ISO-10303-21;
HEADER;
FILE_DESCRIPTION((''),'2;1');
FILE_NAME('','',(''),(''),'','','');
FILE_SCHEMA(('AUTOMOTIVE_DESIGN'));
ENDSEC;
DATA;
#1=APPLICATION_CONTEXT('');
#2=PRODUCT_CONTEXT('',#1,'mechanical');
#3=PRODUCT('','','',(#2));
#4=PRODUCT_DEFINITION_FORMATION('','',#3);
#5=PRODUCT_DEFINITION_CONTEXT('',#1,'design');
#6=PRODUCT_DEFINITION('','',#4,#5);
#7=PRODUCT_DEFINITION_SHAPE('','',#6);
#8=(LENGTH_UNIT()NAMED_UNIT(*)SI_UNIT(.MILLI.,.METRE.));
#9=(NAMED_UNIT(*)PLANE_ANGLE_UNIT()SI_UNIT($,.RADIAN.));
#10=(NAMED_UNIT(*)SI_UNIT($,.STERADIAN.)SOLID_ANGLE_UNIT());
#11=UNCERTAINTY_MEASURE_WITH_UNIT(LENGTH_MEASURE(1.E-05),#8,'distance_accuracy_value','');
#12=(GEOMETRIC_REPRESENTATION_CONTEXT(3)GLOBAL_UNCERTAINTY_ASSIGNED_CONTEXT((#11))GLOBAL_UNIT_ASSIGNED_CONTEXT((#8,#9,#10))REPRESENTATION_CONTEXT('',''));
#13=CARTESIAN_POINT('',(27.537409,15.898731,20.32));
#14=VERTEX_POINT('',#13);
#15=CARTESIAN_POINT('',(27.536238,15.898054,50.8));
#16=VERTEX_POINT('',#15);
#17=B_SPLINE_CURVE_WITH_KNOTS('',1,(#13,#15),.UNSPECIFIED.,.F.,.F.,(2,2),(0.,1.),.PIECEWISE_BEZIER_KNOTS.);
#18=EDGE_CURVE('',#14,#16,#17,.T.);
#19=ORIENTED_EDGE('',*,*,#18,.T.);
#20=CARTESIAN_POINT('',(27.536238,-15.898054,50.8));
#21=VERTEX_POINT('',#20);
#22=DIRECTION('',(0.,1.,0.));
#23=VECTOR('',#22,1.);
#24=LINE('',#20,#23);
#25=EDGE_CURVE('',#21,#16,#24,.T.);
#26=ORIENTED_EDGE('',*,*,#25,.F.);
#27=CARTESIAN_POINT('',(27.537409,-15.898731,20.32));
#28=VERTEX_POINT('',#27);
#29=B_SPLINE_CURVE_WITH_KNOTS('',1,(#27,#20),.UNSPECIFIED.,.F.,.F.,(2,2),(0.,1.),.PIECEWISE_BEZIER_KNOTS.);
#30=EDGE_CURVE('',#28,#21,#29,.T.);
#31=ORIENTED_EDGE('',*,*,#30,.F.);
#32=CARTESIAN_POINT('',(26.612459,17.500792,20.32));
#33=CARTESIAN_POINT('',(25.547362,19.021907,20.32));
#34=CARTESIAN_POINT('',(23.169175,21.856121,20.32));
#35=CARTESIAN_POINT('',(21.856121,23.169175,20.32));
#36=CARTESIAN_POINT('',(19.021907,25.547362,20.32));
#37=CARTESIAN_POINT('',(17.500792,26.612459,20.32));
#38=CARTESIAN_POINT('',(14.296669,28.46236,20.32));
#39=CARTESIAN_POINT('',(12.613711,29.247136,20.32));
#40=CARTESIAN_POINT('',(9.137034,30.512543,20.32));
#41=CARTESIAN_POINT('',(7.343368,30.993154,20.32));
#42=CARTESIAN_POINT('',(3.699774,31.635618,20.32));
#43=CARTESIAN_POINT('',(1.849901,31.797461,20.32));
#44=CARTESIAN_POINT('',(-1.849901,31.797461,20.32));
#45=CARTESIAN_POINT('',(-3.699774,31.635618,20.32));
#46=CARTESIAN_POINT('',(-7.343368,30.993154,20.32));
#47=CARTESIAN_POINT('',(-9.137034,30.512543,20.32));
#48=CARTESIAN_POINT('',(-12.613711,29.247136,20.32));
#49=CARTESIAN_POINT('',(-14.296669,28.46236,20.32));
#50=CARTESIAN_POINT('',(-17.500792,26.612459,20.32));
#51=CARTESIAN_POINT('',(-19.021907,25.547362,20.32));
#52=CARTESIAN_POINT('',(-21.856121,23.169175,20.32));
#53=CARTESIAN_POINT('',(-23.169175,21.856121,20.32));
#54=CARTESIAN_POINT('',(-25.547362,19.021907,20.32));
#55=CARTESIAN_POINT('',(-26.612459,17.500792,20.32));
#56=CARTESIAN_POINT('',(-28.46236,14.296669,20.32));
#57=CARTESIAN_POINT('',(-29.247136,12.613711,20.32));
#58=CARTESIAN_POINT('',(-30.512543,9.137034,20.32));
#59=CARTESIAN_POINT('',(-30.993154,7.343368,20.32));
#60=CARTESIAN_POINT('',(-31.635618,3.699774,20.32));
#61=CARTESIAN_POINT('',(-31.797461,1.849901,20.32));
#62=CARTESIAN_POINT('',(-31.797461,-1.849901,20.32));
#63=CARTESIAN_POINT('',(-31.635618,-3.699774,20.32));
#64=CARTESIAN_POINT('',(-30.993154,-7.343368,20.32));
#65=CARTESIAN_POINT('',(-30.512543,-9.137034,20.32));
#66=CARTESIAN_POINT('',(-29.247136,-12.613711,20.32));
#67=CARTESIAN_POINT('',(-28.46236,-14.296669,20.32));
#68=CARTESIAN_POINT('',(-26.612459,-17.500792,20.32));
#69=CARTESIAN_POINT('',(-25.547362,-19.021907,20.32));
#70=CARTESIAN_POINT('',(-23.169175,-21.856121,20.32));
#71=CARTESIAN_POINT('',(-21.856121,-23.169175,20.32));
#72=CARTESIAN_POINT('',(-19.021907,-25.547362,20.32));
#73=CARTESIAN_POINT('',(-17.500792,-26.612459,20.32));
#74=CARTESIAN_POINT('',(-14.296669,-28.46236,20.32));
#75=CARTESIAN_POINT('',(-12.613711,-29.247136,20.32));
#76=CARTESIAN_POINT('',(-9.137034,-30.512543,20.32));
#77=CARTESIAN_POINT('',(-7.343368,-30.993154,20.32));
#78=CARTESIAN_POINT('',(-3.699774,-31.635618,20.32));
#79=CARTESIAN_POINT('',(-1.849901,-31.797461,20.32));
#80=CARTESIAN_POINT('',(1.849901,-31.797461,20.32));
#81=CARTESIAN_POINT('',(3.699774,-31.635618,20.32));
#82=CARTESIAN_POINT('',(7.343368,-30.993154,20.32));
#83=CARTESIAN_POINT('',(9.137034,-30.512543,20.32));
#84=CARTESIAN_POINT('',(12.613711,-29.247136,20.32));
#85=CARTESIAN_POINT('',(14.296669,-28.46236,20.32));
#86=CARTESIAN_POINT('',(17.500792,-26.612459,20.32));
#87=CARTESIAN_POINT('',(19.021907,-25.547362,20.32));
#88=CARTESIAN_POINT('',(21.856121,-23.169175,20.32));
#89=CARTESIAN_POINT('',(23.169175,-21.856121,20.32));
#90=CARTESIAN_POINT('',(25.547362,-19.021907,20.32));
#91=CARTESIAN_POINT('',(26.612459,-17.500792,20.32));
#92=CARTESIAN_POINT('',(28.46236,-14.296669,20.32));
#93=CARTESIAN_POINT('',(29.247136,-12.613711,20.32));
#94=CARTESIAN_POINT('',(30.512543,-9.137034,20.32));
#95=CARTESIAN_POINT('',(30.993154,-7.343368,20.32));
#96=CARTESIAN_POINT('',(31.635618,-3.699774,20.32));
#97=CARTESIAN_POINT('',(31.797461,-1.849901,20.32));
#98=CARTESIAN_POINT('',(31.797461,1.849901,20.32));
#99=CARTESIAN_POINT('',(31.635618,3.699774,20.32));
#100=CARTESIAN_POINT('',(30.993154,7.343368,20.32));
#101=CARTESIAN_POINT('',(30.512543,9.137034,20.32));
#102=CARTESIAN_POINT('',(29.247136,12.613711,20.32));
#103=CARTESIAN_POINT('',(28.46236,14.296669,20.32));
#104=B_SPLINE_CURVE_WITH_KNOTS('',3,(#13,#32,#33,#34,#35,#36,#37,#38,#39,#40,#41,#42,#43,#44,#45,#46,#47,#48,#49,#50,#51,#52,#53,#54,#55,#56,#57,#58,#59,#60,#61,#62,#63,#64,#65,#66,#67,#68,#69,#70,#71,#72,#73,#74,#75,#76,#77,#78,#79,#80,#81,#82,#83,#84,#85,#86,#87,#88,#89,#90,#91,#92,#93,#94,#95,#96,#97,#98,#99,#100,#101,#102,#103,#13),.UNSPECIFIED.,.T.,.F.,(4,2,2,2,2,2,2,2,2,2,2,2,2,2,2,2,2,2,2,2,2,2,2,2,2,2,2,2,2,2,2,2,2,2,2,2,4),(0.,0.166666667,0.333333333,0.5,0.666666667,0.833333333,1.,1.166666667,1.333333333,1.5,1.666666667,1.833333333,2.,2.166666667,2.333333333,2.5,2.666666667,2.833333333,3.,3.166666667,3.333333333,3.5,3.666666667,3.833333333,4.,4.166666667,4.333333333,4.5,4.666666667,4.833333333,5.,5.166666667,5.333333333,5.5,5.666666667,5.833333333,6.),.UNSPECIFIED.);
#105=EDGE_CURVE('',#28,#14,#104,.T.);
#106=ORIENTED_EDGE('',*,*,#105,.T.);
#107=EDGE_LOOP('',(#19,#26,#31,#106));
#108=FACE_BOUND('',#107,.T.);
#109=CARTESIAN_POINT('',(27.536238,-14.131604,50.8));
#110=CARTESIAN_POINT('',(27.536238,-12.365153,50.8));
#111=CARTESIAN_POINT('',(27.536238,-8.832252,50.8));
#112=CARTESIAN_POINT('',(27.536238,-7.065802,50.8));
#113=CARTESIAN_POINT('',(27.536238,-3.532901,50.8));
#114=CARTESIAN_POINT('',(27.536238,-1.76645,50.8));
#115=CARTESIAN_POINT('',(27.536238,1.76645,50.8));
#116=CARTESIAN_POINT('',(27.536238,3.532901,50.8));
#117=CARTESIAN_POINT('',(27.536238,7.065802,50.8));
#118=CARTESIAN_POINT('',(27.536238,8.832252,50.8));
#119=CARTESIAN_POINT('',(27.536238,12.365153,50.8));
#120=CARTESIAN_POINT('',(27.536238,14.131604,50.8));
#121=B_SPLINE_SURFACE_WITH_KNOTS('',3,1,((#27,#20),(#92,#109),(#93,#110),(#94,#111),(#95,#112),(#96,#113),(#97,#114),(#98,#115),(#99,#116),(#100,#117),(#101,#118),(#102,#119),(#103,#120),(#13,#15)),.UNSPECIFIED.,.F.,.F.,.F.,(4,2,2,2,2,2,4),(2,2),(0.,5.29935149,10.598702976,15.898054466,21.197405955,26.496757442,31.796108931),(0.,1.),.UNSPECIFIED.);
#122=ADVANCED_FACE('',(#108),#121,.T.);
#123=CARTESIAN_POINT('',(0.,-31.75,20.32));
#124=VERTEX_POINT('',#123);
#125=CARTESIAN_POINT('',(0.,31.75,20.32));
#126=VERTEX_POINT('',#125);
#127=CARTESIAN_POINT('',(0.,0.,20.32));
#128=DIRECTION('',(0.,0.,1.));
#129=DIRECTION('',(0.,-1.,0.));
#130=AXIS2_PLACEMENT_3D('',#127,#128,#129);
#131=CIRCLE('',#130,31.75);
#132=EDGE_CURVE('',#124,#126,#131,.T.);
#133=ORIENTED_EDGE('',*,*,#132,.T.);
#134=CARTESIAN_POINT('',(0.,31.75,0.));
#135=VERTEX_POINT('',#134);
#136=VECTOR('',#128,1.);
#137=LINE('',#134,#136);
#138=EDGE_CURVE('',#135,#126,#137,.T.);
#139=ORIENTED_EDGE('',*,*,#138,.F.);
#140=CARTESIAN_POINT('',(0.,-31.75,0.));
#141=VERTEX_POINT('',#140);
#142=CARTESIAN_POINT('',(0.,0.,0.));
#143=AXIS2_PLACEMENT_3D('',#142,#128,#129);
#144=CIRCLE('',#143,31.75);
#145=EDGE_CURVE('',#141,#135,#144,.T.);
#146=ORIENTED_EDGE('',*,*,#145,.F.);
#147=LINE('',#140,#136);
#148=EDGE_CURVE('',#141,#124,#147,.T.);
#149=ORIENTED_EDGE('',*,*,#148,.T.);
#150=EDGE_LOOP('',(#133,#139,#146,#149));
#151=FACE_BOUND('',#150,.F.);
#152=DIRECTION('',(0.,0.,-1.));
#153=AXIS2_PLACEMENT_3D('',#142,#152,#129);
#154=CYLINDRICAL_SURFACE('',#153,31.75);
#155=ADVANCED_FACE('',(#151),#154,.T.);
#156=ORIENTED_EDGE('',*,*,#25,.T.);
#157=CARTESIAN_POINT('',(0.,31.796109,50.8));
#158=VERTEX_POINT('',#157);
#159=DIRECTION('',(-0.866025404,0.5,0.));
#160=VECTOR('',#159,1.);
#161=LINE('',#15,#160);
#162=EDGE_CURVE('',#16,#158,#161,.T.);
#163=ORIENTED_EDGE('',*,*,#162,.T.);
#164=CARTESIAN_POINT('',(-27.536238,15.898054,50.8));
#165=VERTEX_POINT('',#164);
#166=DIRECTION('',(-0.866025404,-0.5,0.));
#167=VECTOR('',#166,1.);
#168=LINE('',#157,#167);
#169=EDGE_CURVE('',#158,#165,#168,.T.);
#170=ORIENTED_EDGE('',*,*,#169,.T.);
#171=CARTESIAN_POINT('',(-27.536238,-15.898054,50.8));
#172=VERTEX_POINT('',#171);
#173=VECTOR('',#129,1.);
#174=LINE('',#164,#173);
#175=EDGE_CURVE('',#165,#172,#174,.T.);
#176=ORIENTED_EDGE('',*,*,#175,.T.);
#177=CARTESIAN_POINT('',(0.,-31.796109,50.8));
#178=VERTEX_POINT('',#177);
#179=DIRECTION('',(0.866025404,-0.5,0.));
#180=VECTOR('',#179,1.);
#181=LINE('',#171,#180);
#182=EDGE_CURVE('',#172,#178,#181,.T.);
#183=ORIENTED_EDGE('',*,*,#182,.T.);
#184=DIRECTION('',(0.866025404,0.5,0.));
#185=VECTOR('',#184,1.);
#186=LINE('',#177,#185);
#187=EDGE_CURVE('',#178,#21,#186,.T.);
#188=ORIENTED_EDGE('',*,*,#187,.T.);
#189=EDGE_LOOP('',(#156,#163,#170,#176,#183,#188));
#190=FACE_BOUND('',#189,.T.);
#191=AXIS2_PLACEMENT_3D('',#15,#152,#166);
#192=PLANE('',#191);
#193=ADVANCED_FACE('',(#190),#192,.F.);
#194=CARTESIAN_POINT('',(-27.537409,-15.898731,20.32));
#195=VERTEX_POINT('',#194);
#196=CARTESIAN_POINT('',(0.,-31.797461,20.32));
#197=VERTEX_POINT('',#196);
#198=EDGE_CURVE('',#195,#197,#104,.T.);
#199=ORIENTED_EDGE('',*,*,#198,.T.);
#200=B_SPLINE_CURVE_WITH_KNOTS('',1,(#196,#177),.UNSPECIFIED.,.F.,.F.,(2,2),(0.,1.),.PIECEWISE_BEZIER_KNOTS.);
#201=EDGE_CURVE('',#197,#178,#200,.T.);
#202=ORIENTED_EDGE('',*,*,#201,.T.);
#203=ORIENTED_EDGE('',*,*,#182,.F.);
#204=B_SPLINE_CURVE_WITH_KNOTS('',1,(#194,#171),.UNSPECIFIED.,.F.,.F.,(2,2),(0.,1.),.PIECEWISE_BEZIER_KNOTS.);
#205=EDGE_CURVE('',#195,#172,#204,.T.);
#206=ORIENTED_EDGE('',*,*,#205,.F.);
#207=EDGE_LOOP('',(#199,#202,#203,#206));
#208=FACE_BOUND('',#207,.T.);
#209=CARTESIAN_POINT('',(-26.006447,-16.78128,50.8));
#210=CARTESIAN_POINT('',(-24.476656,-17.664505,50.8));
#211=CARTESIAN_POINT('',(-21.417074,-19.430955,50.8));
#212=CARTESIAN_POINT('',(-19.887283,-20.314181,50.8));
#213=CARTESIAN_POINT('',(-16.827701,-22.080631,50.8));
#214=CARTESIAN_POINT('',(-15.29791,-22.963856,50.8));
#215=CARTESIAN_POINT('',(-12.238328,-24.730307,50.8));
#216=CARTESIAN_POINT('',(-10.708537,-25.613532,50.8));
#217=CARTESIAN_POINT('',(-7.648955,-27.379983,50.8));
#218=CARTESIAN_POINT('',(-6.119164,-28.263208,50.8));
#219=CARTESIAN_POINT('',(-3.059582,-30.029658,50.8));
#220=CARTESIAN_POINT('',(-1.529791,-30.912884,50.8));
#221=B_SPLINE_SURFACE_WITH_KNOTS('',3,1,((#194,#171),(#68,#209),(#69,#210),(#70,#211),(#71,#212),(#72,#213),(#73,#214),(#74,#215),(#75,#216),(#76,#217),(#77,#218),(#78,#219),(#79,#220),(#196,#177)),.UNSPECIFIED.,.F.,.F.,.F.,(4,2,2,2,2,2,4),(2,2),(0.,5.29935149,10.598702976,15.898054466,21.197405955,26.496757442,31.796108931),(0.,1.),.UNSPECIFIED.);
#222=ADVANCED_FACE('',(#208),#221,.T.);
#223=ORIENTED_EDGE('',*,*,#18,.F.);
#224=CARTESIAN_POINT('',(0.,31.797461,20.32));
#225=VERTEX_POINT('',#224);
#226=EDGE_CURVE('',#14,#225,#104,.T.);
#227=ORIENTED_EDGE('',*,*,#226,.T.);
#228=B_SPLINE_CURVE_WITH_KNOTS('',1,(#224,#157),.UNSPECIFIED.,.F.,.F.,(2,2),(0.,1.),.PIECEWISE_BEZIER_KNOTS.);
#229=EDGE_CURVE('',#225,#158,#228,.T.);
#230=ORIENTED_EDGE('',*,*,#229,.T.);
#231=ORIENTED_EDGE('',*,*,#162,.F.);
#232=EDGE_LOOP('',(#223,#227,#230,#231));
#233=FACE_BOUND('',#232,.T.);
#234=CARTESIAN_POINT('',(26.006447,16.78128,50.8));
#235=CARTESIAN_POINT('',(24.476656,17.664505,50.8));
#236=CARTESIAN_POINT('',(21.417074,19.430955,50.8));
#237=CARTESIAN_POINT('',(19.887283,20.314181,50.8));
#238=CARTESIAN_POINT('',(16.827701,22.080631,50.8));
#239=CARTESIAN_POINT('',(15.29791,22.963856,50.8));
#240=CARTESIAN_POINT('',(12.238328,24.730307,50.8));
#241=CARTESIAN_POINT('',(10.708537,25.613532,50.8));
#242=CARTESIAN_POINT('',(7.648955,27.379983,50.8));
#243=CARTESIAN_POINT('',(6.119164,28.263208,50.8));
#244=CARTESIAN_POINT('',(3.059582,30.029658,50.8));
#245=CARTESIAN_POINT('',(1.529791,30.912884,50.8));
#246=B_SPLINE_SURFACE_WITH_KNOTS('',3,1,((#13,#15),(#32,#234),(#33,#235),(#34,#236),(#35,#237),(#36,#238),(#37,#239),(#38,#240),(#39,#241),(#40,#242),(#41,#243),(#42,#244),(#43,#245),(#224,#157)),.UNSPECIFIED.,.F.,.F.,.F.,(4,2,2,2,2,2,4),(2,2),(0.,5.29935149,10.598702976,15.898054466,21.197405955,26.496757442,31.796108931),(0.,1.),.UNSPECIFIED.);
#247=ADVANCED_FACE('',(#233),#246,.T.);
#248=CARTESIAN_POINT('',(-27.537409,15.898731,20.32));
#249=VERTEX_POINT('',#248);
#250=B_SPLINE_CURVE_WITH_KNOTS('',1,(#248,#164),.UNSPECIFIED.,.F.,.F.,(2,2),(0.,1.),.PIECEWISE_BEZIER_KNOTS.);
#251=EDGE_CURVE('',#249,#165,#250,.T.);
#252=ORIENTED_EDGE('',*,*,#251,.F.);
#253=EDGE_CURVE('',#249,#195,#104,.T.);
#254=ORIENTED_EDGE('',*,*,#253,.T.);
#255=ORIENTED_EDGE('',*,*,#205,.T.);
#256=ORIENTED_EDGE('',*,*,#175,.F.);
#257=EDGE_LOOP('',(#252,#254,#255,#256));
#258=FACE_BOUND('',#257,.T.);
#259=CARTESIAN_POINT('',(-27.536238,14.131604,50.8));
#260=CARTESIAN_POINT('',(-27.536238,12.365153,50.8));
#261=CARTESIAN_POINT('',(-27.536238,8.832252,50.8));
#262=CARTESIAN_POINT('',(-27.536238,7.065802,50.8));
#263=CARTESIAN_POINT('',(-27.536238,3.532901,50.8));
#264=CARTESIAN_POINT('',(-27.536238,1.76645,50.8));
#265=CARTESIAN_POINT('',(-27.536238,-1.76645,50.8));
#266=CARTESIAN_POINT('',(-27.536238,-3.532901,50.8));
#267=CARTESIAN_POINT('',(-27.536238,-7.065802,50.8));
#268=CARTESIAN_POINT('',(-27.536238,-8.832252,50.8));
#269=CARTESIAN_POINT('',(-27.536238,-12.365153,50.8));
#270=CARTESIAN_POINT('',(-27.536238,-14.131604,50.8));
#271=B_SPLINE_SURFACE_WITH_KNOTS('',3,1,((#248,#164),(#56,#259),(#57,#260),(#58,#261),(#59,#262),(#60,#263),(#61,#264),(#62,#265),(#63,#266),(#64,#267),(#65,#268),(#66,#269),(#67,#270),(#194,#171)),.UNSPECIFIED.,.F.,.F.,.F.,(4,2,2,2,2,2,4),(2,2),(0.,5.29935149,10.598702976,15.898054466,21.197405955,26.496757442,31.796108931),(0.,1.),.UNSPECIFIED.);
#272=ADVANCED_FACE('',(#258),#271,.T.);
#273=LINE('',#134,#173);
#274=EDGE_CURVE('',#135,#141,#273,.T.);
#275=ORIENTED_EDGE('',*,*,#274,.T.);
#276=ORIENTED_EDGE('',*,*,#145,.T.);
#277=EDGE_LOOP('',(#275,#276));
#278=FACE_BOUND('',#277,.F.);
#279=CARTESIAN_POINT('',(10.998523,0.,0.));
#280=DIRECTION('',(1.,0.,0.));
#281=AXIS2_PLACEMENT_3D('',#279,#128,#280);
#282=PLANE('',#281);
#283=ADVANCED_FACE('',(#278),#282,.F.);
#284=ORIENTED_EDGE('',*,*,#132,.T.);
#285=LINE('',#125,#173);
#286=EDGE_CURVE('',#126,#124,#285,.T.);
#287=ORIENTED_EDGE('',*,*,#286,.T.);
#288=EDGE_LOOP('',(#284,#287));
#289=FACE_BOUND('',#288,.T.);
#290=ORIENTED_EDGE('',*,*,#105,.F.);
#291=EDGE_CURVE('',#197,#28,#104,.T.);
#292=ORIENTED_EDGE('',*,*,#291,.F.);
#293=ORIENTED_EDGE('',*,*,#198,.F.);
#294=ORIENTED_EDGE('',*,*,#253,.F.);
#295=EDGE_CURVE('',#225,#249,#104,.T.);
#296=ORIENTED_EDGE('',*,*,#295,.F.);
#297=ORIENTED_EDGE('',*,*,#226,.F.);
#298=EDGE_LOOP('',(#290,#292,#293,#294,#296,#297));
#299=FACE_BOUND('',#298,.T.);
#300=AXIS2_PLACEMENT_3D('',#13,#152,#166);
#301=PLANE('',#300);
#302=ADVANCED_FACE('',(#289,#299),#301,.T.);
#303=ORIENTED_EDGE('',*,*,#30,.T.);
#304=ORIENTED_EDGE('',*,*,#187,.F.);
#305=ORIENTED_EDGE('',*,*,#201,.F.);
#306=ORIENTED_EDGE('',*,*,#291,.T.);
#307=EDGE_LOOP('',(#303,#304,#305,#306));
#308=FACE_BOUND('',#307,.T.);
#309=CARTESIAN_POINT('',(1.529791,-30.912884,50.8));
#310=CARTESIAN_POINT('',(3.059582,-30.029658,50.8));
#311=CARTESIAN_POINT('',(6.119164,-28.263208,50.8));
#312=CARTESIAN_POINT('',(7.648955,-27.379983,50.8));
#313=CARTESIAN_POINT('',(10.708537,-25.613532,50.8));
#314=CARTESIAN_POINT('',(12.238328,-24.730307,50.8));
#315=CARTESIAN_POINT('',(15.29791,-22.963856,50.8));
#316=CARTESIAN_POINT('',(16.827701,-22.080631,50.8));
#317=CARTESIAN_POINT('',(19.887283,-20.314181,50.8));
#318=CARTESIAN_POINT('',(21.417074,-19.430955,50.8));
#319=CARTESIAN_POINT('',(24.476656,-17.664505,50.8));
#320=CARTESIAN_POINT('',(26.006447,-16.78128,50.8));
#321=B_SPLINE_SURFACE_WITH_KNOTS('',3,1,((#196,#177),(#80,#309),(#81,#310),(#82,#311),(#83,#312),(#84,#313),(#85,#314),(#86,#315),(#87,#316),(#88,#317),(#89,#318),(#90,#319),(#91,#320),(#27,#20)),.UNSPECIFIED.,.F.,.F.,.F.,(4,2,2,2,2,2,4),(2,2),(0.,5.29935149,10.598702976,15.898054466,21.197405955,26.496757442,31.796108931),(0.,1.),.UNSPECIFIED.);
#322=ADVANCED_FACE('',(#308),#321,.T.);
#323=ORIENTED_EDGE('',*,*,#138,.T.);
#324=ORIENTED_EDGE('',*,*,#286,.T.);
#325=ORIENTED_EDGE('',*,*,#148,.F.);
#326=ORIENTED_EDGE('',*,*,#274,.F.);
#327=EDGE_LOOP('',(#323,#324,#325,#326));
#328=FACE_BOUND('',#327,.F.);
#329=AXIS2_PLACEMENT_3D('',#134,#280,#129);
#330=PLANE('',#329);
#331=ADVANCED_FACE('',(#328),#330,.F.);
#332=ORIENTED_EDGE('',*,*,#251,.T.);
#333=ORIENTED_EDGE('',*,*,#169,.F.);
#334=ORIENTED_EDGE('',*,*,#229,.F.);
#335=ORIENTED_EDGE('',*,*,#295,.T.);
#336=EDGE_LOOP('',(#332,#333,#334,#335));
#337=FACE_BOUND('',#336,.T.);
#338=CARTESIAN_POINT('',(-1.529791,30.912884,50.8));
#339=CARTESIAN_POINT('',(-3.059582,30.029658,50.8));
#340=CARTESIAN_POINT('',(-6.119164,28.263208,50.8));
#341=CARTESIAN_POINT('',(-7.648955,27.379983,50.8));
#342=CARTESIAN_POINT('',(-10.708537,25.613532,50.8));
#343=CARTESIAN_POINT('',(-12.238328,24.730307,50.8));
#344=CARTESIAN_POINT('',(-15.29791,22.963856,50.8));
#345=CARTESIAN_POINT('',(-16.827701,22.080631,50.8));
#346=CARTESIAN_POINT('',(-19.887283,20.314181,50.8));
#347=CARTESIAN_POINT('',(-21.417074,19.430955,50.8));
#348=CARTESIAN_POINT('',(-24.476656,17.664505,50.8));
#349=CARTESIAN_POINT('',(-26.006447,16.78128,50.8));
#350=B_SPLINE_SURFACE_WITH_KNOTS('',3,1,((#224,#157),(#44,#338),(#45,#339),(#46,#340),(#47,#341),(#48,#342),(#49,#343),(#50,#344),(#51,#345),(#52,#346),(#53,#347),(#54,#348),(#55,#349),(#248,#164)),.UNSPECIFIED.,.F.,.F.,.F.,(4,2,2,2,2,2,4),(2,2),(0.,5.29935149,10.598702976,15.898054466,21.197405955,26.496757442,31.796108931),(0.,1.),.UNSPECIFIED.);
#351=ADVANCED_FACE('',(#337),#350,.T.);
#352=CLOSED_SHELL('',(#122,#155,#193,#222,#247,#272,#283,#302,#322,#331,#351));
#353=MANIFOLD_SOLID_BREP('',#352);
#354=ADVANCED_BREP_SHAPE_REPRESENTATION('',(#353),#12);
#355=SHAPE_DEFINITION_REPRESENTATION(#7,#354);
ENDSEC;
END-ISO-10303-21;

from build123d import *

# Parameters (mm, degrees)
F1_DEPTH = 20.32


# Not quite as in the source:
# - the arcs of a loft's sections are written as splines that run evenly, so that the points pair up as in the source's solid
# - a feature names something its author has since deleted; it is built from what else it names


with BuildPart() as f1:
    # F0 (on Top) → F1 (new body)
    with BuildSketch(Plane.XY):
        with BuildLine():
            ThreePointArc((0, -31.75), (31.75, 0), (0, 31.75))
            Line((0, 31.75), (0, -31.75))
        make_face()
    extrude(amount=F1_DEPTH)

    # F4 (on offset) → F6 section 0
    with BuildSketch(Plane.XY.offset(20.32)):
        with BuildLine():
            add(Edge.make_bspline(
                [(0, 31.7974612136), (-1.8499013065, 31.7974612136), (-3.6997740452, 31.63561832), (-7.3433683431, 30.9931543385), (-9.1370336348, 30.5125431721), (-12.6137108486, 29.2471361521), (-14.2966690809, 28.4623598401), (-17.5007921327, 26.6124585335), (-19.0219074714, 25.5473621069), (-21.8561207037, 23.169174829), (-23.169174829, 21.8561207037), (-25.5473621069, 19.0219074714), (-26.6124585335, 17.5007921327), (-27.5374091868, 15.8987306068)],
                knots=[0, 0, 0, 0, 0.1666666667, 0.1666666667, 0.3333333333, 0.3333333333, 0.5, 0.5, 0.6666666667, 0.6666666667, 0.8333333333, 0.8333333333, 1, 1, 1, 1], degree=3))
            add(Edge.make_bspline(
                [(-27.5374091868, 15.8987306068), (-28.4623598401, 14.2966690809), (-29.2471361521, 12.6137108486), (-30.5125431721, 9.1370336348), (-30.9931543385, 7.3433683431), (-31.63561832, 3.6997740452), (-31.7974612136, 1.8499013065), (-31.7974612136, -1.8499013065), (-31.63561832, -3.6997740452), (-30.9931543385, -7.3433683431), (-30.5125431721, -9.1370336348), (-29.2471361521, -12.6137108486), (-28.4623598401, -14.2966690809), (-27.5374091868, -15.8987306068)],
                knots=[0, 0, 0, 0, 0.1666666667, 0.1666666667, 0.3333333333, 0.3333333333, 0.5, 0.5, 0.6666666667, 0.6666666667, 0.8333333333, 0.8333333333, 1, 1, 1, 1], degree=3))
            add(Edge.make_bspline(
                [(-27.5374091868, -15.8987306068), (-26.6124585335, -17.5007921327), (-25.5473621069, -19.0219074714), (-23.169174829, -21.8561207037), (-21.8561207037, -23.169174829), (-19.0219074714, -25.5473621069), (-17.5007921327, -26.6124585335), (-14.2966690809, -28.4623598401), (-12.6137108486, -29.2471361521), (-9.1370336348, -30.5125431721), (-7.3433683431, -30.9931543385), (-3.6997740452, -31.63561832), (-1.8499013065, -31.7974612136), (0, -31.7974612136)],
                knots=[0, 0, 0, 0, 0.1666666667, 0.1666666667, 0.3333333333, 0.3333333333, 0.5, 0.5, 0.6666666667, 0.6666666667, 0.8333333333, 0.8333333333, 1, 1, 1, 1], degree=3))
            add(Edge.make_bspline(
                [(0, -31.7974612136), (1.8499013065, -31.7974612136), (3.6997740452, -31.63561832), (7.3433683431, -30.9931543385), (9.1370336348, -30.5125431721), (12.6137108486, -29.2471361521), (14.2966690809, -28.4623598401), (17.5007921327, -26.6124585335), (19.0219074714, -25.5473621069), (21.8561207037, -23.169174829), (23.169174829, -21.8561207037), (25.5473621069, -19.0219074714), (26.6124585335, -17.5007921327), (27.5374091868, -15.8987306068)],
                knots=[0, 0, 0, 0, 0.1666666667, 0.1666666667, 0.3333333333, 0.3333333333, 0.5, 0.5, 0.6666666667, 0.6666666667, 0.8333333333, 0.8333333333, 1, 1, 1, 1], degree=3))
            add(Edge.make_bspline(
                [(27.5374091868, -15.8987306068), (28.4623598401, -14.2966690809), (29.2471361521, -12.6137108486), (30.5125431721, -9.1370336348), (30.9931543385, -7.3433683431), (31.63561832, -3.6997740452), (31.7974612136, -1.8499013065), (31.7974612136, 1.8499013065), (31.63561832, 3.6997740452), (30.9931543385, 7.3433683431), (30.5125431721, 9.1370336348), (29.2471361521, 12.6137108486), (28.4623598401, 14.2966690809), (27.5374091868, 15.8987306068)],
                knots=[0, 0, 0, 0, 0.1666666667, 0.1666666667, 0.3333333333, 0.3333333333, 0.5, 0.5, 0.6666666667, 0.6666666667, 0.8333333333, 0.8333333333, 1, 1, 1, 1], degree=3))
            add(Edge.make_bspline(
                [(27.5374091868, 15.8987306068), (26.6124585335, 17.5007921327), (25.5473621069, 19.0219074714), (23.169174829, 21.8561207037), (21.8561207037, 23.169174829), (19.0219074714, 25.5473621069), (17.5007921327, 26.6124585335), (14.2966690809, 28.4623598401), (12.6137108486, 29.2471361521), (9.1370336348, 30.5125431721), (7.3433683431, 30.9931543385), (3.6997740452, 31.63561832), (1.8499013065, 31.7974612136), (0, 31.7974612136)],
                knots=[0, 0, 0, 0, 0.1666666667, 0.1666666667, 0.3333333333, 0.3333333333, 0.5, 0.5, 0.6666666667, 0.6666666667, 0.8333333333, 0.8333333333, 1, 1, 1, 1], degree=3))
        make_face()
    # F5 (on offset) → F6 section 1
    with BuildSketch(Plane.XY.offset(50.8)):
        Polygon((27.536238076, 15.8980544657), (0, 31.7961089313), (-27.536238076, 15.8980544657), (-27.536238076, -15.8980544657), (0, -31.7961089313), (27.536238076, -15.8980544657), align=None)
    loft(ruled=True)


solid = f1.part
